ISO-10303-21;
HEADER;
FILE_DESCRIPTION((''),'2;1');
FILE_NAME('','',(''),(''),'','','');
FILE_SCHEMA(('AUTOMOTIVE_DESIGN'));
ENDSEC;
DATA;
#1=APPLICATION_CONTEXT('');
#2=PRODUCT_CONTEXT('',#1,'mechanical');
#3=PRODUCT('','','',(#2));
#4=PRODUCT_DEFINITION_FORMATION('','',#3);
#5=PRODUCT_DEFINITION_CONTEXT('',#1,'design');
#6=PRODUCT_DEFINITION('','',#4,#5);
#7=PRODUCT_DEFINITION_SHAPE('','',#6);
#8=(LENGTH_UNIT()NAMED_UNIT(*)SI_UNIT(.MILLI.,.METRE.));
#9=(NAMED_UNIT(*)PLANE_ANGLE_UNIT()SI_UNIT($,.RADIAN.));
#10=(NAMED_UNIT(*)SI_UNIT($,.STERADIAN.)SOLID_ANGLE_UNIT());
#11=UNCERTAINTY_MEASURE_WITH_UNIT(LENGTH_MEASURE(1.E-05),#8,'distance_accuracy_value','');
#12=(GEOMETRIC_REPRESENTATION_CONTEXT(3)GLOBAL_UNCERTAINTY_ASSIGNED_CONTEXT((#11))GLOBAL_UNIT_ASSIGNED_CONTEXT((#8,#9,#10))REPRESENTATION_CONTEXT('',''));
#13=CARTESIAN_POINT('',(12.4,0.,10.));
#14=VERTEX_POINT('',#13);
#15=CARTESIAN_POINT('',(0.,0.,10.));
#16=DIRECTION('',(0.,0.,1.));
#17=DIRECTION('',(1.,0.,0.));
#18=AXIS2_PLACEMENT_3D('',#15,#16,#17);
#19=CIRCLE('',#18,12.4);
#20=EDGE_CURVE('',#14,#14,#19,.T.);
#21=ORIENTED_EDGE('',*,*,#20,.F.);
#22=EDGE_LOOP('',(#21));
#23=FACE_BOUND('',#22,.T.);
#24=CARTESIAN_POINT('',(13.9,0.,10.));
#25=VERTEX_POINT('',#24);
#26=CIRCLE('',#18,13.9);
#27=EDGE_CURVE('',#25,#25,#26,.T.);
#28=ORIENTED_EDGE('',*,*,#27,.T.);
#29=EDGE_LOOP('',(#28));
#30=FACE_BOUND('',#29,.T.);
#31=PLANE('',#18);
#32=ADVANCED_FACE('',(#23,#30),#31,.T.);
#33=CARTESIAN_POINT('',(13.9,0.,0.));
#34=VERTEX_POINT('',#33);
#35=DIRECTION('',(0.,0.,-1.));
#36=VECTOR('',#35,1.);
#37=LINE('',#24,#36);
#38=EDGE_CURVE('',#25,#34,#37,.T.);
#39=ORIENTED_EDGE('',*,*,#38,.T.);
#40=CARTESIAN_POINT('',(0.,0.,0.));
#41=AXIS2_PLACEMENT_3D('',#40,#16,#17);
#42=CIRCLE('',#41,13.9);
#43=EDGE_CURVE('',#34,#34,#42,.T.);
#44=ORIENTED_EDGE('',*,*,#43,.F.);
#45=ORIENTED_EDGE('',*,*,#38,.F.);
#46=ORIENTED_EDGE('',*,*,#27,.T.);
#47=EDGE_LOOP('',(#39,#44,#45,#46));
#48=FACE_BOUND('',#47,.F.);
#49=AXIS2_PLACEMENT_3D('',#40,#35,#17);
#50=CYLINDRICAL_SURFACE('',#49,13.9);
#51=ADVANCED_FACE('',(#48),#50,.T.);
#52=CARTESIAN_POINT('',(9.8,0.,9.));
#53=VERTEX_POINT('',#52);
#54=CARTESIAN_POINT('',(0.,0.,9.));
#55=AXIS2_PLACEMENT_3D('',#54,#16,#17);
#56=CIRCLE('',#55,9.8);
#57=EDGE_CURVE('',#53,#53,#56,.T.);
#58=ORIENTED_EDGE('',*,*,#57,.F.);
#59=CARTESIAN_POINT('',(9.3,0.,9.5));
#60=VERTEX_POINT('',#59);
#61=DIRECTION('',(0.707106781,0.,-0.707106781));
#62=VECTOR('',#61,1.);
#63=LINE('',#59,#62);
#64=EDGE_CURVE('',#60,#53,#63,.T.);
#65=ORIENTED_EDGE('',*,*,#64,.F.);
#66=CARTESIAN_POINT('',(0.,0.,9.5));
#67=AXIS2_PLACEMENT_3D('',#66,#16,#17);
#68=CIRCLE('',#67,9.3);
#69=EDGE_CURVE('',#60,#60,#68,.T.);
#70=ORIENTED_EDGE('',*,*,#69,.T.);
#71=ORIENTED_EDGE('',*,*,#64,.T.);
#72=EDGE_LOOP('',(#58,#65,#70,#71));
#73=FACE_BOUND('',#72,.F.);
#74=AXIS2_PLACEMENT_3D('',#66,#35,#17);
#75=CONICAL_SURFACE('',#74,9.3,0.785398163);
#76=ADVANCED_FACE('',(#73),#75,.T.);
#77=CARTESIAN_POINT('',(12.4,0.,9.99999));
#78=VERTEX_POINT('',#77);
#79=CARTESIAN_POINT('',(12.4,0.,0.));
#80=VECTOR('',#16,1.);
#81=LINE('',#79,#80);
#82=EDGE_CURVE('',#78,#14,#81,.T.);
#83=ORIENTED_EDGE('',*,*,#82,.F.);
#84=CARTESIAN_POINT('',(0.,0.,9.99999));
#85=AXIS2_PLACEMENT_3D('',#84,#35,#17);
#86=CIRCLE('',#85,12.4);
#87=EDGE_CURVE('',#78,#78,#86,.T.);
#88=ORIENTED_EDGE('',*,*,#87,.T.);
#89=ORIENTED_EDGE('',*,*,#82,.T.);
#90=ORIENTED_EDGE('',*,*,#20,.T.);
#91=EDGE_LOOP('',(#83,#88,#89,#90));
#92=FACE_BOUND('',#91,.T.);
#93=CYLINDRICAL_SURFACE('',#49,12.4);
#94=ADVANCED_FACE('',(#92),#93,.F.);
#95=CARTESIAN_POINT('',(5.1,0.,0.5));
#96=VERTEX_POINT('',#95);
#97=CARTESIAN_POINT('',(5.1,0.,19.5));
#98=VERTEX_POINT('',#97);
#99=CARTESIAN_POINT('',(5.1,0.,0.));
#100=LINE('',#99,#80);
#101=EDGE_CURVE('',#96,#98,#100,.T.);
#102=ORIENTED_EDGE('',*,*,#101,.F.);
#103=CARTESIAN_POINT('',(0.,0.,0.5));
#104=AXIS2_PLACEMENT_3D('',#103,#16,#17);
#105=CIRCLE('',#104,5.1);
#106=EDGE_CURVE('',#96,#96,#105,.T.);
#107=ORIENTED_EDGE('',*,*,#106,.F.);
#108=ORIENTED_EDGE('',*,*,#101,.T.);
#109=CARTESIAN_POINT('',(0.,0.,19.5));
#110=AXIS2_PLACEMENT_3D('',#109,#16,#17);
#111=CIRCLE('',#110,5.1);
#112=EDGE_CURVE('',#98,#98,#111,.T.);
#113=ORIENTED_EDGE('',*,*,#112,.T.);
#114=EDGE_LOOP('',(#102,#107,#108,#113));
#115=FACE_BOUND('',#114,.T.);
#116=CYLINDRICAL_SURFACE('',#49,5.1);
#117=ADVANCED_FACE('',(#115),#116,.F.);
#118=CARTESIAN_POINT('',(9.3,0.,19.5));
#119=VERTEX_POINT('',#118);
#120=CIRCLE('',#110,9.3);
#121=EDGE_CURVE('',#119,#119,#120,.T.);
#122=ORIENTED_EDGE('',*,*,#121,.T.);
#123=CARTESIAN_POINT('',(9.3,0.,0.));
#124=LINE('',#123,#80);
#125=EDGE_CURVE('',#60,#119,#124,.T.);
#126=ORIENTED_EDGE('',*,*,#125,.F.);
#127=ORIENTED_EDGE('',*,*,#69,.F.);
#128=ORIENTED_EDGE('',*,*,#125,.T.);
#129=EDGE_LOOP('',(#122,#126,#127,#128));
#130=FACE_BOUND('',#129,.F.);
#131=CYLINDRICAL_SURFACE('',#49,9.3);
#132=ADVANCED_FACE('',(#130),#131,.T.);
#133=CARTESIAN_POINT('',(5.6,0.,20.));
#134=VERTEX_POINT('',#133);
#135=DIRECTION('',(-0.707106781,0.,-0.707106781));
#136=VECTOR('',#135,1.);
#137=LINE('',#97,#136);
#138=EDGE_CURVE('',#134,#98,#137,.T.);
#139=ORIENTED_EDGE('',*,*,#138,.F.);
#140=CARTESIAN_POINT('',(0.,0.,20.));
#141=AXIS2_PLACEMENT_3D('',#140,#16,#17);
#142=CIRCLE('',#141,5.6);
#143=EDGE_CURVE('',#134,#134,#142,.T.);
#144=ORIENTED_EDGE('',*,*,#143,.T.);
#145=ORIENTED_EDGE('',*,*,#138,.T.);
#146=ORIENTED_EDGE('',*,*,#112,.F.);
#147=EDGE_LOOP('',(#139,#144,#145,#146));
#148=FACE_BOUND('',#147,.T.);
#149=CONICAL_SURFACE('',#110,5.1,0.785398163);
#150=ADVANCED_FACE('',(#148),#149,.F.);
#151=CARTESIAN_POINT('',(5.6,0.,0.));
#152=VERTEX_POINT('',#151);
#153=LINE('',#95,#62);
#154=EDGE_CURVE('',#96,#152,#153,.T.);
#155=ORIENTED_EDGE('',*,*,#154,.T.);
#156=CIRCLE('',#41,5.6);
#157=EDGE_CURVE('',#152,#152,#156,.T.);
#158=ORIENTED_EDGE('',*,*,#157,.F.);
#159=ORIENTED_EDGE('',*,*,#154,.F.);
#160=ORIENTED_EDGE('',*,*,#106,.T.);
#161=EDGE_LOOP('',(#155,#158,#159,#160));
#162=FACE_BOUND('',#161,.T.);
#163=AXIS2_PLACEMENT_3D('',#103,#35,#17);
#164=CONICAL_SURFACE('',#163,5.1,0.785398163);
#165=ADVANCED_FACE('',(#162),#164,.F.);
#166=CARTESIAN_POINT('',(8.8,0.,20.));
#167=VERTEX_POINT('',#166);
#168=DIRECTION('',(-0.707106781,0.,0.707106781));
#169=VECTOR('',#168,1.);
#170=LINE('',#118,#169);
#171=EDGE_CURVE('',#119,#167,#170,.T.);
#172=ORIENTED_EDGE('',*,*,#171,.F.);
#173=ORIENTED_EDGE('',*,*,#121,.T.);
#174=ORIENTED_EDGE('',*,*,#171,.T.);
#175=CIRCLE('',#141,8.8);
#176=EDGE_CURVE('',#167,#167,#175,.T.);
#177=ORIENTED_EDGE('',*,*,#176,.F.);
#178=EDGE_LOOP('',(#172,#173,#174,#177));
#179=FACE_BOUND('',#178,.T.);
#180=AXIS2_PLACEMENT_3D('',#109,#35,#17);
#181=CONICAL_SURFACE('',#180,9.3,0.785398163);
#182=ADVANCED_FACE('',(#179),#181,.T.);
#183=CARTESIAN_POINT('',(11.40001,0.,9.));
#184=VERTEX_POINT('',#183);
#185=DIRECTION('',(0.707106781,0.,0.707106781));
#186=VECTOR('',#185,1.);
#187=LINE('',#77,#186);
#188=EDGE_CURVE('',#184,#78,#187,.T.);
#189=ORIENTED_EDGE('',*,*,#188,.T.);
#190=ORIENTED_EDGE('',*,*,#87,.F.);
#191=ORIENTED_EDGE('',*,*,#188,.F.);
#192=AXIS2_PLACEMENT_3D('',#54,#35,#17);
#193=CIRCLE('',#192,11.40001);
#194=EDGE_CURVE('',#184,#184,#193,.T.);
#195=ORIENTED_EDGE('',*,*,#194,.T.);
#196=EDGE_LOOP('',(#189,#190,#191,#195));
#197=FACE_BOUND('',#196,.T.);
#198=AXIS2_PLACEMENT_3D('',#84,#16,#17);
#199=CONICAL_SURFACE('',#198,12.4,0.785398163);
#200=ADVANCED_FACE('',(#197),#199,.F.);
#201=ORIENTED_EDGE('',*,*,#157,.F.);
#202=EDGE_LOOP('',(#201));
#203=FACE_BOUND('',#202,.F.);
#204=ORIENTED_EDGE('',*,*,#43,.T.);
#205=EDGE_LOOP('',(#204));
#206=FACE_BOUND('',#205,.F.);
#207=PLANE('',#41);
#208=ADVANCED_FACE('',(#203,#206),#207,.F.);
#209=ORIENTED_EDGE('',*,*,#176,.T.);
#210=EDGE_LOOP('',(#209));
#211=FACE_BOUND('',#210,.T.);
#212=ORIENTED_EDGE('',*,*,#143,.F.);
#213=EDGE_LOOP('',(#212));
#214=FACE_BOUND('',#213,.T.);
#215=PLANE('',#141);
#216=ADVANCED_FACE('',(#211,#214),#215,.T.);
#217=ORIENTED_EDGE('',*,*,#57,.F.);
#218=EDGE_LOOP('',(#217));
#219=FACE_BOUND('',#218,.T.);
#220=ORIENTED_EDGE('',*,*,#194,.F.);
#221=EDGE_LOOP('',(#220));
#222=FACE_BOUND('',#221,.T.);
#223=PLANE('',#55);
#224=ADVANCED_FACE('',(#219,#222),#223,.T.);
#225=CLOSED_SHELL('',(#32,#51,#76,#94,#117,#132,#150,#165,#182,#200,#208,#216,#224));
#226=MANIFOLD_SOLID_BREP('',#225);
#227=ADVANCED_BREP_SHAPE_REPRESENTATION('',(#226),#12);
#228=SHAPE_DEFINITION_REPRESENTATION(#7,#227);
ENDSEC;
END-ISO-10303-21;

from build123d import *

# Parameters (mm, degrees)
F0_R     = 13.9
F0_R_2   = 12.4
F1_DEPTH = 10
F0_R_3   = 9.3
F2_DEPTH = 9
F0_R_4   = 5.1
F3_DEPTH = 20
F4_SIZE  = 0.5
F5_SIZE  = 0.99999


# Not quite as in the source:
# - a fillet or chamfer is up to 0.001 mm smaller than in the source, because OpenCascade refuses the exact size


with BuildPart() as f1:
    # F0 (on Top) → F1 (new body)
    with BuildSketch(Plane.XY):
        Circle(F0_R)
        Circle(F0_R_2, mode=Mode.SUBTRACT)
    extrude(amount=F1_DEPTH)

    # F0 (on Top) → F2 (join)
    with BuildSketch(Plane.XY):
        Circle(F0_R)
        Circle(F0_R_2, mode=Mode.SUBTRACT)
        Circle(F0_R_2)
        Circle(F0_R_3, mode=Mode.SUBTRACT)
    extrude(amount=F2_DEPTH)

    # F0 (on Top) → F3 (join)
    with BuildSketch(Plane.XY):
        Circle(F0_R_3)
        Circle(F0_R_4, mode=Mode.SUBTRACT)
    extrude(amount=F3_DEPTH)

    # F4
    f4_edges = [f1.edges().sort_by_distance(p)[0] for p in [
        (-5.1, 0, 20),
        (-9.3, 0, 20),
        (-9.3, 0, 9),
        (-5.1, 0, 0),
    ]]
    chamfer(f4_edges, length=F4_SIZE)

    # F5 (size 1 in the source; OpenCascade refuses exactly that, so slightly less here)
    f5_edges = [f1.edges().sort_by_distance(p)[0] for p in [
        (-12.4, 0, 9),
    ]]
    chamfer(f5_edges, length=F5_SIZE)


solid = f1.part
